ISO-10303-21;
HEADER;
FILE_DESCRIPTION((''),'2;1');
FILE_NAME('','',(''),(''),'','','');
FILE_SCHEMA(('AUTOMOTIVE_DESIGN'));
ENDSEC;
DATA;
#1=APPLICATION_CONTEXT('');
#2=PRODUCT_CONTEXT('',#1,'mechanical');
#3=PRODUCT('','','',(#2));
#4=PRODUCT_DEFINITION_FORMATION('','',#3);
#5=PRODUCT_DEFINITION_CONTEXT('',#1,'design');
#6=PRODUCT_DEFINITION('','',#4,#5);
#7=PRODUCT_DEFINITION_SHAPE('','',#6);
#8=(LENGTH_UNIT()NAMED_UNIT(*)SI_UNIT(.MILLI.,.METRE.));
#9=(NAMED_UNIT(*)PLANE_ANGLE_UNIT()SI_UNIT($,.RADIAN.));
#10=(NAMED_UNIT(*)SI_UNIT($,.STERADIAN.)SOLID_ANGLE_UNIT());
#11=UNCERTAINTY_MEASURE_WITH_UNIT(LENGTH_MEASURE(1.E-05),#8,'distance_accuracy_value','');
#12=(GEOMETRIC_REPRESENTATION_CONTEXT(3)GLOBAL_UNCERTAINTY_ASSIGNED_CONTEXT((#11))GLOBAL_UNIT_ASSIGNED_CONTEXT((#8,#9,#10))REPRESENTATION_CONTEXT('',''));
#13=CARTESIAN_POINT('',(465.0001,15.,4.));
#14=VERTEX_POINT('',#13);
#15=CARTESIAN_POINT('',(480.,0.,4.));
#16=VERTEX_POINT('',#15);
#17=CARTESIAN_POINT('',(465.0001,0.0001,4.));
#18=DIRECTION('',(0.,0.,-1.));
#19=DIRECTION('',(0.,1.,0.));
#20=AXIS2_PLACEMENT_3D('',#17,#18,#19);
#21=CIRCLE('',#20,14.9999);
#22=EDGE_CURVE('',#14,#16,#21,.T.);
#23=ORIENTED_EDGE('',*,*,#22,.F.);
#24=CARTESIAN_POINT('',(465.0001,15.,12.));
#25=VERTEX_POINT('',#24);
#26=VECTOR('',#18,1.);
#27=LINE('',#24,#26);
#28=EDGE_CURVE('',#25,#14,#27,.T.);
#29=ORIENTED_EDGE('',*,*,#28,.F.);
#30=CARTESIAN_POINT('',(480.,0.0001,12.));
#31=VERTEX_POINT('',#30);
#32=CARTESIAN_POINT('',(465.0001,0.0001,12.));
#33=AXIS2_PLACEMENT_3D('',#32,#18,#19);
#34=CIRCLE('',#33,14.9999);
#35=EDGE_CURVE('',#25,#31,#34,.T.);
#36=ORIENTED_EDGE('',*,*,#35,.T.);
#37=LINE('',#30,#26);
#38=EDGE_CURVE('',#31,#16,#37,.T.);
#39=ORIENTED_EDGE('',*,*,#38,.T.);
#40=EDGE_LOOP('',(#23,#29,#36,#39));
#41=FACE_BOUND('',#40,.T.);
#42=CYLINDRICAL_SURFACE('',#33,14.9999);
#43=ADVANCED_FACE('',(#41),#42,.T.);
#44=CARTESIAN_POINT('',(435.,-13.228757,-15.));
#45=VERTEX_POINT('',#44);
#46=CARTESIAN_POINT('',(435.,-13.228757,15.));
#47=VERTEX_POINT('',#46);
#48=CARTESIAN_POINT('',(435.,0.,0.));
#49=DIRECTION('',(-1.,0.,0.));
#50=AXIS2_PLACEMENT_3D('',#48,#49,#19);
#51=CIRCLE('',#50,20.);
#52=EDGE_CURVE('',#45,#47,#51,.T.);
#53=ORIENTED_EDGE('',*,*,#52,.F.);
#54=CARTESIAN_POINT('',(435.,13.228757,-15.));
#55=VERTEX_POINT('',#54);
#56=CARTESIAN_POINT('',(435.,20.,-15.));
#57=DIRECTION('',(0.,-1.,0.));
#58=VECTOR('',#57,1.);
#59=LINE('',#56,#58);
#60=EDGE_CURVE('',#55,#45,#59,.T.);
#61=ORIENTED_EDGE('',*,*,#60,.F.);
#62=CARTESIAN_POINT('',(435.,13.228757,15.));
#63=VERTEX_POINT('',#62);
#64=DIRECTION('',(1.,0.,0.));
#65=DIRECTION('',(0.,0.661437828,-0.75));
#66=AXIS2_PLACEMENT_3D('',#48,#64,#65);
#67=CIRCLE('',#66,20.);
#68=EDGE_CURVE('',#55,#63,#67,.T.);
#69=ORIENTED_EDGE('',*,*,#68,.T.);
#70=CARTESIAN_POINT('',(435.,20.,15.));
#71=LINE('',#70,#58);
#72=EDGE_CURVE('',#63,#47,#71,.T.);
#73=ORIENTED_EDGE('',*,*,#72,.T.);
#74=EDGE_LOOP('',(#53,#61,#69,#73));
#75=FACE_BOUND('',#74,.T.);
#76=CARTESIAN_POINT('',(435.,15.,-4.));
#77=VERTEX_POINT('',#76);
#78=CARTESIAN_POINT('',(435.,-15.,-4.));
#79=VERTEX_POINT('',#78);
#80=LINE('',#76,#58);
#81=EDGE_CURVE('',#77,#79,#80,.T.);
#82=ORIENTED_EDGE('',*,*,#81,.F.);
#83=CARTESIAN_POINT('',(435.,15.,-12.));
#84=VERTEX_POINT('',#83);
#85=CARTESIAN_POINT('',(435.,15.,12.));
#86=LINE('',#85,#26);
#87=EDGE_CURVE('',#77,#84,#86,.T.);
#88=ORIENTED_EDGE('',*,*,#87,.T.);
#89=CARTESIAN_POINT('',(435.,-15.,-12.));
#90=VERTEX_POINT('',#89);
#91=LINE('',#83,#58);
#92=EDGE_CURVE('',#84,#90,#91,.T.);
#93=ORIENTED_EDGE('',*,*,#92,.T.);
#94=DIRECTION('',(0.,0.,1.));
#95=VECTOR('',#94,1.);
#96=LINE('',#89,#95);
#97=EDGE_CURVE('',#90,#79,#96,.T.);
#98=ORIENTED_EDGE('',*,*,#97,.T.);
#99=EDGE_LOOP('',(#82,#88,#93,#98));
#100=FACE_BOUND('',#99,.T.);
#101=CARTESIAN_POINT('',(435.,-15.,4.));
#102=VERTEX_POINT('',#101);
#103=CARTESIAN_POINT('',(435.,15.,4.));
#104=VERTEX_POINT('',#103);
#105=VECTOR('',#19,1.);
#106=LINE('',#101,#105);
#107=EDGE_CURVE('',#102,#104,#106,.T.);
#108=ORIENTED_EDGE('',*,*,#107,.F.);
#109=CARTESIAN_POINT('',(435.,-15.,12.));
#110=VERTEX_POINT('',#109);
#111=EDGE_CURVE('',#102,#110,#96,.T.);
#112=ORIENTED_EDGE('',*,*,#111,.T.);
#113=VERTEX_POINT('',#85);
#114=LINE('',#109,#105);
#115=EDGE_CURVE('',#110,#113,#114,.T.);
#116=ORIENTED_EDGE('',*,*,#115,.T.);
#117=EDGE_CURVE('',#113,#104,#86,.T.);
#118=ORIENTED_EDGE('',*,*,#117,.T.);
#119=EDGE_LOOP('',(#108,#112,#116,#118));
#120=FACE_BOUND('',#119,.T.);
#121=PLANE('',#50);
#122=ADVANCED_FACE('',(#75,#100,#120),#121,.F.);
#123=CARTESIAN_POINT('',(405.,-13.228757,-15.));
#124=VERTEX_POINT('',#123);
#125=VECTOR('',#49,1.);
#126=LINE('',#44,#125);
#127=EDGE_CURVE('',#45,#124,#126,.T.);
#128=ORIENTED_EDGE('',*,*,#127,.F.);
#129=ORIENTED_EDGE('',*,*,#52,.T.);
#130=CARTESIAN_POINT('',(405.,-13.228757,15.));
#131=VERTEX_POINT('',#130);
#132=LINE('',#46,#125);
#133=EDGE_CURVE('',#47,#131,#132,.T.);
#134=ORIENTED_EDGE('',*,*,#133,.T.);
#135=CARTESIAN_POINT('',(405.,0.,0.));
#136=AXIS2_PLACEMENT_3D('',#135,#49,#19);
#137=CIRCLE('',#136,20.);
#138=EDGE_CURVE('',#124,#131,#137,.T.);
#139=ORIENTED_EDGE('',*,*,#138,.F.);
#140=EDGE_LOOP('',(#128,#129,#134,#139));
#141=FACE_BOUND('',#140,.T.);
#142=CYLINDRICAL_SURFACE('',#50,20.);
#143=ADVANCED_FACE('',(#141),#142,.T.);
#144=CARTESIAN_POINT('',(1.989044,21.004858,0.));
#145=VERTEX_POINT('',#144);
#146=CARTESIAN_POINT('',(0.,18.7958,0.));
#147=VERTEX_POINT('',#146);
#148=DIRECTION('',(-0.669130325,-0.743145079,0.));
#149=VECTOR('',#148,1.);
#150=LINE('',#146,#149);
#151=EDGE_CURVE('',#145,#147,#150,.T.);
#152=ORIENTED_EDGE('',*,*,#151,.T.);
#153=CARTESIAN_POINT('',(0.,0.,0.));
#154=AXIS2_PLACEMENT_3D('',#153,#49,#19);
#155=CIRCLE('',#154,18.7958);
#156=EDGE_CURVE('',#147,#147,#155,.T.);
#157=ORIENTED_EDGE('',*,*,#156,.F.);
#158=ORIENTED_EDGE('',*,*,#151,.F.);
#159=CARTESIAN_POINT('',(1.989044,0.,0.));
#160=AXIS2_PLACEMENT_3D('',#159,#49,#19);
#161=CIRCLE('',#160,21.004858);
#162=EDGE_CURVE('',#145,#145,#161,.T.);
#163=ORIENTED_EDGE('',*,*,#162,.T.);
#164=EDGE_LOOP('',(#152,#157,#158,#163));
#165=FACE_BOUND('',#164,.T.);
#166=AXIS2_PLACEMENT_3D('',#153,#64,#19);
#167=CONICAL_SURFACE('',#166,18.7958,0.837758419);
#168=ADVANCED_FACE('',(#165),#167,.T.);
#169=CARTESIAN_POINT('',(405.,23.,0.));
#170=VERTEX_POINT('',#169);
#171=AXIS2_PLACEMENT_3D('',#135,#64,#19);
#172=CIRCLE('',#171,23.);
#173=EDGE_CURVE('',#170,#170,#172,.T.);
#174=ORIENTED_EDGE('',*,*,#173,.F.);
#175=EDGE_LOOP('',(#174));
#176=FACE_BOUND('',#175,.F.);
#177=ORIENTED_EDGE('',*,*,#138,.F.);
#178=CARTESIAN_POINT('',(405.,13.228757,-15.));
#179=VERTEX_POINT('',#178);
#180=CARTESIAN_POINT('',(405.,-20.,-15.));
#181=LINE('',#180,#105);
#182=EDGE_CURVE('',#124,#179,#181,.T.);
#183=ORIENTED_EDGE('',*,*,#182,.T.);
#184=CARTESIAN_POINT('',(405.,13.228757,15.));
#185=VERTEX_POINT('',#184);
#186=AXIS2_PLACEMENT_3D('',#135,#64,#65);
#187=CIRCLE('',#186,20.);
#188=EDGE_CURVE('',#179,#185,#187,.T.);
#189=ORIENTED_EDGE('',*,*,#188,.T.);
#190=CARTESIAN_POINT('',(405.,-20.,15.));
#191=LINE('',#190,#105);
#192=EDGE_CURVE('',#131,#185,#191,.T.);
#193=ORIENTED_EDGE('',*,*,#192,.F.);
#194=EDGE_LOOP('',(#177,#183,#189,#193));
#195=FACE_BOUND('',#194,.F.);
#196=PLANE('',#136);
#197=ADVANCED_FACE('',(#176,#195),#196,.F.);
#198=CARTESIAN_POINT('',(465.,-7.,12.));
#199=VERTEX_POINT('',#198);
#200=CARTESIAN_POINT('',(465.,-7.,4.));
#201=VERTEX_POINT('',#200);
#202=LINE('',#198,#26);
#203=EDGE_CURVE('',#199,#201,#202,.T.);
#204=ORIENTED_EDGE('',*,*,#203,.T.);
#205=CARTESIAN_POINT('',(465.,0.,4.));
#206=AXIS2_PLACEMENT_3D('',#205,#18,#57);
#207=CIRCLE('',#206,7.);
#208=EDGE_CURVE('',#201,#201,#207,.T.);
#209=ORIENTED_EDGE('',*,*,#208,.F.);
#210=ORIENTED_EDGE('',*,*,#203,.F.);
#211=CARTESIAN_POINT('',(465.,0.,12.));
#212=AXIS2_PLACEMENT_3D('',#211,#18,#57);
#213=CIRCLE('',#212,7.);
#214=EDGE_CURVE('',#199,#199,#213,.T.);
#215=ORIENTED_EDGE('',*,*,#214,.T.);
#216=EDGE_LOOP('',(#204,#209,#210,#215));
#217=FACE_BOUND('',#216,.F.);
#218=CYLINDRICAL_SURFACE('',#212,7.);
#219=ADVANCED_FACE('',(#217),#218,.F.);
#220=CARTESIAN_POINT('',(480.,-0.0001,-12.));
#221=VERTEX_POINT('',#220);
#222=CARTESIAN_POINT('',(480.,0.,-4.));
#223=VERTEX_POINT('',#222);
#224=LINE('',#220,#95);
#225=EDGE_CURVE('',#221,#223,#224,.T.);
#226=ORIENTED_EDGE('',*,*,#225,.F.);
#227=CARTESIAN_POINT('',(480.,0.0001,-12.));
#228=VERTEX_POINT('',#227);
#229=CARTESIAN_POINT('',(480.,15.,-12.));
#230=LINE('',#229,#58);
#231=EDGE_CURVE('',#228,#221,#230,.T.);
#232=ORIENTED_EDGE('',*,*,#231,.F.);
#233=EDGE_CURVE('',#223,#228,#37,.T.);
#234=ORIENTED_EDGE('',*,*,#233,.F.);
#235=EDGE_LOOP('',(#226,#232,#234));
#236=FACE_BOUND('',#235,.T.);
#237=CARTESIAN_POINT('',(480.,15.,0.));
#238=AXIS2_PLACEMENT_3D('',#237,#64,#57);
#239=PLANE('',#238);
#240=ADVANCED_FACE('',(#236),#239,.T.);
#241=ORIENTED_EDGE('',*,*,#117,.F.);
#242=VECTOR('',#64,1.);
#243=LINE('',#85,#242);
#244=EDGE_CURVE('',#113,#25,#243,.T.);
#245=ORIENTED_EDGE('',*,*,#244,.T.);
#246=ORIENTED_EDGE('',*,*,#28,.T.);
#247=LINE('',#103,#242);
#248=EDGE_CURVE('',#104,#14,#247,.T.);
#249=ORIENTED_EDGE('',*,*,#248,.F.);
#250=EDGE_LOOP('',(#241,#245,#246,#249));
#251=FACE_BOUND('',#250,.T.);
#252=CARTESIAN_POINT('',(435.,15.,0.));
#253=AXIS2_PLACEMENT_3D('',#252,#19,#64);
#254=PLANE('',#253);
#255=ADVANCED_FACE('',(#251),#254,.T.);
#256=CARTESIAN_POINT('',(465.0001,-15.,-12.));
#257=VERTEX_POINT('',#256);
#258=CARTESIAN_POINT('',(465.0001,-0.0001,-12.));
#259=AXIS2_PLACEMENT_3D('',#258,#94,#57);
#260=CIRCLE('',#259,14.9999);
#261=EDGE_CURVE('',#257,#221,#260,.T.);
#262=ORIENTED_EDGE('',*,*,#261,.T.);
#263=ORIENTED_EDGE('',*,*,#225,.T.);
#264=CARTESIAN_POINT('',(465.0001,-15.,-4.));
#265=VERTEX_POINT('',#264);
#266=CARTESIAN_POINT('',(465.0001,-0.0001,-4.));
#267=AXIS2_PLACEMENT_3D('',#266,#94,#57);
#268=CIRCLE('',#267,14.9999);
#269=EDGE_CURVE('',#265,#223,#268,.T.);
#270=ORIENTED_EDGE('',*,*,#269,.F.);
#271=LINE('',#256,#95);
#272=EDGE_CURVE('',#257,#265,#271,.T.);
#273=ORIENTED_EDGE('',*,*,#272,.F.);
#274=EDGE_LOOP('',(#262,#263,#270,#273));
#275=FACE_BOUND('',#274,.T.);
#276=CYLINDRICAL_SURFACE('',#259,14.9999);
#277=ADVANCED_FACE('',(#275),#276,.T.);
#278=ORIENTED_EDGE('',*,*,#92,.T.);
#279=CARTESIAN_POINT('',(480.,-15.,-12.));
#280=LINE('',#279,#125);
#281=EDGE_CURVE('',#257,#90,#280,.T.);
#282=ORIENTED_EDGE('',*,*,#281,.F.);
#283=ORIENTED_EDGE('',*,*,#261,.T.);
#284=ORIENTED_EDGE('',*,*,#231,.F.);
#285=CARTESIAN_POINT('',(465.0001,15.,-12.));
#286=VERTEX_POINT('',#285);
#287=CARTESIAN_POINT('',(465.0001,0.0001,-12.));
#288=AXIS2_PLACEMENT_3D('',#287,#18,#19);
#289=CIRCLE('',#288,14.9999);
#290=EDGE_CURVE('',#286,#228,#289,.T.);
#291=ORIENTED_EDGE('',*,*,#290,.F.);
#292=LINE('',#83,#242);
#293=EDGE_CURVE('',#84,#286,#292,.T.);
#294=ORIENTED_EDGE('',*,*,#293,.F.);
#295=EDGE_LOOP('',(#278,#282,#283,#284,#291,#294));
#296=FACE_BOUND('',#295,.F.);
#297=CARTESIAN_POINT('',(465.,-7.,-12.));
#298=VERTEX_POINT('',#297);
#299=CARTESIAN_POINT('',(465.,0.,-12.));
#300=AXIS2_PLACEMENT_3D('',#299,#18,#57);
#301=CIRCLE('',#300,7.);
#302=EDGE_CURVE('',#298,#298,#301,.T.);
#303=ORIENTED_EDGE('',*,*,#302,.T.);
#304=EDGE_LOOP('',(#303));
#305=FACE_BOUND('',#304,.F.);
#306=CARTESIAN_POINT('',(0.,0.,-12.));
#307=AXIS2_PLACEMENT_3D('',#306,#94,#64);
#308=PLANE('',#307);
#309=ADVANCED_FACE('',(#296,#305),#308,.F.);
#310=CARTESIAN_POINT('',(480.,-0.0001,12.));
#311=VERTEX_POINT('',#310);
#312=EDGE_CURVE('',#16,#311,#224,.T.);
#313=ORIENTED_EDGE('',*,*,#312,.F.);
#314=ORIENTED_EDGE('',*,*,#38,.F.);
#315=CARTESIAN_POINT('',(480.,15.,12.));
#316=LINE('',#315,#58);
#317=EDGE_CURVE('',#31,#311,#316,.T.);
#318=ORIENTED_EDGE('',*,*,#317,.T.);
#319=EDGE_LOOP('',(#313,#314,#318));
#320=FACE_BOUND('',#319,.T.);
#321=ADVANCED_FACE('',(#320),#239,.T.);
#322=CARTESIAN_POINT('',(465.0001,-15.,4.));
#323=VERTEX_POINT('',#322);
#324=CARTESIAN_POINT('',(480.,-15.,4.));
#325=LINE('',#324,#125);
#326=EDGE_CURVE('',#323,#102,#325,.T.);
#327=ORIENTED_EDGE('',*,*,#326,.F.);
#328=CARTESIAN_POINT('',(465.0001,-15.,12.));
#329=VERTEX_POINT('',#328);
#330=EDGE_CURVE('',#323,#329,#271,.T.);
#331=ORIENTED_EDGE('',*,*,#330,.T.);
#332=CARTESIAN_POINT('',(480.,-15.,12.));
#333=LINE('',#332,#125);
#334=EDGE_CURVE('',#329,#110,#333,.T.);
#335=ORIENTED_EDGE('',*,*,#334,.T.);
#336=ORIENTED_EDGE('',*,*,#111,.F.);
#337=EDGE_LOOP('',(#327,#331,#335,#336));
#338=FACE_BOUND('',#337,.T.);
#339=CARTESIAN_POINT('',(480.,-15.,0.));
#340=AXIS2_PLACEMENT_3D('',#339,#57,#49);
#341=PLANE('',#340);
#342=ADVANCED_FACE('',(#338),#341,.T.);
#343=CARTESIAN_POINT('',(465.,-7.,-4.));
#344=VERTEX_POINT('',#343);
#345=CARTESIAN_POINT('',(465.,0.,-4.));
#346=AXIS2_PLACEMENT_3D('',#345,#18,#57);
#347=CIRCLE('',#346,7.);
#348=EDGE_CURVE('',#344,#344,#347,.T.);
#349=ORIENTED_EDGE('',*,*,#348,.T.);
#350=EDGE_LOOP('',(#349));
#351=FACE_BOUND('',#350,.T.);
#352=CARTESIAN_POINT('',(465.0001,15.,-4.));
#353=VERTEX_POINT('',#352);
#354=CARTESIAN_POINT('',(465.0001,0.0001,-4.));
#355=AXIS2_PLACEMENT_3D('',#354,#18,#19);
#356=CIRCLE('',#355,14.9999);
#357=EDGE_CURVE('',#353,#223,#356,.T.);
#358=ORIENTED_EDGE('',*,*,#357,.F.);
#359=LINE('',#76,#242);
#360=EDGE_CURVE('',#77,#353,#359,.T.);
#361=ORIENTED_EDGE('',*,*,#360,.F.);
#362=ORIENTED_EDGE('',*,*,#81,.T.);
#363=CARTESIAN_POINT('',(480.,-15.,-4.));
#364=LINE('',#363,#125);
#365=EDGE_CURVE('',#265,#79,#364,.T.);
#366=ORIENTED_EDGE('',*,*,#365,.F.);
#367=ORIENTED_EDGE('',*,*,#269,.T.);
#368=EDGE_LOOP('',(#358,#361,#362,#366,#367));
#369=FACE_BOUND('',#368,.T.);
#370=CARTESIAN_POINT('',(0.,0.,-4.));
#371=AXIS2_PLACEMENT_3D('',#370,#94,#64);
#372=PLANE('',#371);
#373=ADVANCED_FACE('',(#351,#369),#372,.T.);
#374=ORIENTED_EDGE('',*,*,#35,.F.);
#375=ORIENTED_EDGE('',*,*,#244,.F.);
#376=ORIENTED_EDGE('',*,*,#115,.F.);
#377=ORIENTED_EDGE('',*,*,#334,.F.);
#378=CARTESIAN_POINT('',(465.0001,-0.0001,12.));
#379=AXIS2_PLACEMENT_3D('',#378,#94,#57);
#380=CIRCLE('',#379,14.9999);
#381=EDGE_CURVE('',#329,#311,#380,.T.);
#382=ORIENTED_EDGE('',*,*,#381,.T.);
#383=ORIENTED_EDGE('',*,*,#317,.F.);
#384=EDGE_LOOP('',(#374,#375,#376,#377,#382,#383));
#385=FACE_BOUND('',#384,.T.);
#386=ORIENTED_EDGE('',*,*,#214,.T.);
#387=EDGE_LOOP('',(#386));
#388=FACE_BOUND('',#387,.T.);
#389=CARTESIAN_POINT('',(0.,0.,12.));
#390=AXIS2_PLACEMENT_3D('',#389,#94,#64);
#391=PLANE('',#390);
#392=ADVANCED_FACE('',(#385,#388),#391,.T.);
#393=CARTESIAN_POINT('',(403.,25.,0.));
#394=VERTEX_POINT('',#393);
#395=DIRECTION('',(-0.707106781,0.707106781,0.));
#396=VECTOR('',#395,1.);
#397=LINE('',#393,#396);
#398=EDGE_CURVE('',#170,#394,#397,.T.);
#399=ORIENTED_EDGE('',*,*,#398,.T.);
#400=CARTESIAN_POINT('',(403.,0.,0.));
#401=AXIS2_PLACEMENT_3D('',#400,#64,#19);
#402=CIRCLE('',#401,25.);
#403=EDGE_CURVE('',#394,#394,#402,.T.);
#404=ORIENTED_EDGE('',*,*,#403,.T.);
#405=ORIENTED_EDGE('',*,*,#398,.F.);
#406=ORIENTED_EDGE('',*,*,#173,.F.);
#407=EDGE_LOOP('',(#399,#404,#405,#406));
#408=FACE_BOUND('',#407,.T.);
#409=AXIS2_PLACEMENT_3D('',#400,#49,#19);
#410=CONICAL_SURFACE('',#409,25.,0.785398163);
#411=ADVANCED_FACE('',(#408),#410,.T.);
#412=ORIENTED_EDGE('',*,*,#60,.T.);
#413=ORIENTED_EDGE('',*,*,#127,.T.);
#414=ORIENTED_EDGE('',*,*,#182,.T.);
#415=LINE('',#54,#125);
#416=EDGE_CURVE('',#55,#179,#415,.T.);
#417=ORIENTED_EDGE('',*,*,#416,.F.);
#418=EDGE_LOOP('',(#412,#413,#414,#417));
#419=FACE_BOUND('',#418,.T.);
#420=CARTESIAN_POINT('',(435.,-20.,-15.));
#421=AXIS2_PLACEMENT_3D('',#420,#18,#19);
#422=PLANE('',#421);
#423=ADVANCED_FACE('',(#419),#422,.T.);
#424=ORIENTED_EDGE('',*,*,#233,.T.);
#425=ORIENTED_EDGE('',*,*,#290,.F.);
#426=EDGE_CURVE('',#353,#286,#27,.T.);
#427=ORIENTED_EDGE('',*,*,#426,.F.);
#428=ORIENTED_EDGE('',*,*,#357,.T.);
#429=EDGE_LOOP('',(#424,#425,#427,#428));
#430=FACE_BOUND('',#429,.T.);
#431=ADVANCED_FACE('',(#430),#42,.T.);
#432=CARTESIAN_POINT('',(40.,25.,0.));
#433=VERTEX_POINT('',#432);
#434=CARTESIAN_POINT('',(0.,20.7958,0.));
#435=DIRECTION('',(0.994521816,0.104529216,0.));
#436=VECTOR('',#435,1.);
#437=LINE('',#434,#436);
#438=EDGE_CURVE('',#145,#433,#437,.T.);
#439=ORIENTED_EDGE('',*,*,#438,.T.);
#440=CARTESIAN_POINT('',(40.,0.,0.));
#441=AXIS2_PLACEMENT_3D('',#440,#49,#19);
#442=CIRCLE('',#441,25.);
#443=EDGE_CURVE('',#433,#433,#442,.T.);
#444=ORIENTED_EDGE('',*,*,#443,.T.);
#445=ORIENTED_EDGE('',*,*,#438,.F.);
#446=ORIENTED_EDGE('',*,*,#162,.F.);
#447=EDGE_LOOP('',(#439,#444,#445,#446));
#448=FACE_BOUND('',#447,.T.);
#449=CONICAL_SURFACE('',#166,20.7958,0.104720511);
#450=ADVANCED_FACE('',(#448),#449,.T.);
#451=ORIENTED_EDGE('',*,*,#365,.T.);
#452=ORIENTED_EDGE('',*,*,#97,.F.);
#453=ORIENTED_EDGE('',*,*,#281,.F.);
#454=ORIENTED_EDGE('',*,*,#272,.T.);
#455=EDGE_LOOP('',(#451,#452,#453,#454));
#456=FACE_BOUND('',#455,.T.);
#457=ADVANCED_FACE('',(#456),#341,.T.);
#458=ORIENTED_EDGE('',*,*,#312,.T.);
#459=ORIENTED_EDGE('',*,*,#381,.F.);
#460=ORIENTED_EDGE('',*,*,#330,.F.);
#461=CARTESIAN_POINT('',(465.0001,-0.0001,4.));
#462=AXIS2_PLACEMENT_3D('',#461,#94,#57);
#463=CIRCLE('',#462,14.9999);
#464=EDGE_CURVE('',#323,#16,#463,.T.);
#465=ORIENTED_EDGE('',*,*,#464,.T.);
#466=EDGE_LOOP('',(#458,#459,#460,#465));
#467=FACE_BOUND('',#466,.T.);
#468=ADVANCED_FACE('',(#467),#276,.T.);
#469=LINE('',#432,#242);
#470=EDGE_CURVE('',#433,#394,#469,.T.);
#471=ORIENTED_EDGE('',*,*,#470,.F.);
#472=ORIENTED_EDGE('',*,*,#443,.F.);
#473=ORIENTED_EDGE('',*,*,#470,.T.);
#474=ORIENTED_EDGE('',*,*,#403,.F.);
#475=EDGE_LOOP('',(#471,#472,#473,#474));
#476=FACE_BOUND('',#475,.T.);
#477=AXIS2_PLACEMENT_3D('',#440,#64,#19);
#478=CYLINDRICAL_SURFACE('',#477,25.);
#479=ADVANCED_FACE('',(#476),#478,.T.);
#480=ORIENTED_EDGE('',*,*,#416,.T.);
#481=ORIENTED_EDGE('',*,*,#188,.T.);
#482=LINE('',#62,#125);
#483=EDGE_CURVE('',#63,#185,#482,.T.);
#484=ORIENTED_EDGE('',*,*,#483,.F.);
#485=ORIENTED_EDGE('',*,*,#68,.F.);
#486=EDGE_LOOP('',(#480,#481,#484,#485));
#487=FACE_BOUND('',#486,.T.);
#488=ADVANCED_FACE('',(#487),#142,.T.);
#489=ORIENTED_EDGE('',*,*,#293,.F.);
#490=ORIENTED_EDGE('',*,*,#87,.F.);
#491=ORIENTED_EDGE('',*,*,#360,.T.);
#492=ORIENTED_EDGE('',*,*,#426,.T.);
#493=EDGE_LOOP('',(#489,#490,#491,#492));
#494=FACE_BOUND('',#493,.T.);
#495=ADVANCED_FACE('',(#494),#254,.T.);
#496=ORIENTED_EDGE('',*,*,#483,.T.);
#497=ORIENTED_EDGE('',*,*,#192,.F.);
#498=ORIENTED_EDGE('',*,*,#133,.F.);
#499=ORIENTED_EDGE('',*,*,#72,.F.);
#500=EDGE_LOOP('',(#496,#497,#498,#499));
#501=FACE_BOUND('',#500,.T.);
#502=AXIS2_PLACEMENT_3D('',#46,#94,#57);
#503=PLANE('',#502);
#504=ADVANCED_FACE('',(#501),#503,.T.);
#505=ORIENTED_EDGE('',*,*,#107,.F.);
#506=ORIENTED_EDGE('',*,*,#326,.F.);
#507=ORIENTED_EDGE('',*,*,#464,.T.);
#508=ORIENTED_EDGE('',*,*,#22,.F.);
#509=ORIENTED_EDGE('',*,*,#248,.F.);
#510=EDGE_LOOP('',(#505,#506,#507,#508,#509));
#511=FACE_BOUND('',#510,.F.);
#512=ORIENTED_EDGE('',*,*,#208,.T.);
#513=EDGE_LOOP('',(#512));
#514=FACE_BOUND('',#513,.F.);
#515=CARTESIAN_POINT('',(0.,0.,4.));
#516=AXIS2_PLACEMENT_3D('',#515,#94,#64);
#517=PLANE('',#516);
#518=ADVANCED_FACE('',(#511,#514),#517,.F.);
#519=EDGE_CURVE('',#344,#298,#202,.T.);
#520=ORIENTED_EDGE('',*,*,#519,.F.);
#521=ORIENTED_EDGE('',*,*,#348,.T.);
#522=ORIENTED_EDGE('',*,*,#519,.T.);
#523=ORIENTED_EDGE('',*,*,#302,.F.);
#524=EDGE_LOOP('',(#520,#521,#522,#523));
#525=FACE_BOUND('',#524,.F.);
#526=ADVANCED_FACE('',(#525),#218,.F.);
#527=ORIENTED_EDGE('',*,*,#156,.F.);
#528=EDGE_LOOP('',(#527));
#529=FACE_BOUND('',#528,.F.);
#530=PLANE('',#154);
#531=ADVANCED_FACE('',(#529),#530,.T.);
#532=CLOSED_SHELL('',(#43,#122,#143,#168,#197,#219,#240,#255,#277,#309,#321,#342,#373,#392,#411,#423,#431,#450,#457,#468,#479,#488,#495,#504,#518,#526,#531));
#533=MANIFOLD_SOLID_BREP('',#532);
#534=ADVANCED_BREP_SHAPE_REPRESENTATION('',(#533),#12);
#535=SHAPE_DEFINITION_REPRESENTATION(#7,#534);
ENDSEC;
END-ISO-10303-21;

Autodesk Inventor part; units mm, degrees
ref_plane "YZ Plane" through (0, 0, 0) normal (1, 0, 0) x (0, 1, 0)
ref_plane "XZ Plane" through (0, 0, 0) normal (0, 1, 0) x (-1, 0, 0)
ref_plane "XY Plane" through (0, 0, 0) normal (0, 0, 1) x (1, 0, 0)
sketch "Skizze1" plane through (0, 0, 0) normal (0, 0, 1) x (1, 0, 0)
  line L0 (0, 0) -> (0, 20.7958)
  line L1 (0, 20.7958) -> (40, 25)
  line L2 (40, 25) -> (405, 25)
  line L3 (405, 25) -> (405, 0)
  line L4 (405, 0) -> (0, 0)
  line L5 (405, 0) -> (435, 0)
  line L6 (435, 0) -> (435, 20)
  line L7 (435, 20) -> (405, 20)
  line L8 (405, 20) -> (405, 0)
  line L9 (435, 15) -> (480, 15)
  line L10 (480, 15) -> (480, -15)
  line L11 (480, -15) -> (435, -15)
  line L12 (435, -15) -> (435, 15)
  dimension "d0" = 480
  dimension "d1" = 30
  dimension "d2" = 40
  dimension "d3" = 50
  dimension "d4" = 6
  dimension "d5" = 40
  dimension "d6" = 30
  dimension "d7" = 75
revolve "Umdrehung1" add sketch "Skizze1" angle 360 about axis through (405, 0, 0) along (-1, 0, 0) contours L0 L1 L2 L3 L4 | L3 L7 L6 L5
extrude "Extrusion1" add sketch "Skizze1" along normal mid plane 24 contours L6 L9 L10 L11 L12
full round fillet "Rundung1" first side at (450, 15, 4) centre faces at (480, 5, 4) second side at (450, -15, -4)
extrude "Extrusion2" cut sketch "Skizze1" along normal mid plane 8 contours L6 L9 L10 L11 L12
sketch "Skizze2" plane through (0, 0, 12) normal (0, 0, 1) x (1, 0, 0)
  arc A0 (465, -15) -> (465, 15) centre (465, 0) ccw projected
  point P0 (0, 0)
hole "Bohrung1" at (465, 0, 12) direction (0, 0, -1) diameter 14 end through all
sketch "Skizze3" plane through (435, 0, 0) normal (1, 0, 0) x (0, 0, -1)
  line L0 (-15, -20) -> (-20, -20)
  line L1 (-20, -20) -> (-20, 20)
  line L2 (-20, 20) -> (-15, 20)
  line L3 (-15, 20) -> (-15, -20)
  line L4 (20, -20) -> (15, -20)
  line L5 (15, -20) -> (15, 20)
  line L6 (15, 20) -> (20, 20)
  line L7 (20, 20) -> (20, -20)
  circle A0 centre (0, 0) radius 20 projected
  point P0 (-15, -13.2288)
  point P1 (-20, 0)
  point P2 (-15, 13.2288)
  dimension "d20" = 30
extrude "Extrusion3" cut sketch "Skizze3" against normal up to surface (30 mm away) contours L0 L1 A0 L3 | A0 L3 | L1 L2 L3 A0 | A0 L7 L4 L5 | L5 A0 | L5 L6 L7 A0
chamfer "Fase1" distance 2 angle 45 2 edges at (405, -25, 0) (0, -20.7958, 0)
properties part number "Kolbenstange" material "Stahl AISI 4130"
